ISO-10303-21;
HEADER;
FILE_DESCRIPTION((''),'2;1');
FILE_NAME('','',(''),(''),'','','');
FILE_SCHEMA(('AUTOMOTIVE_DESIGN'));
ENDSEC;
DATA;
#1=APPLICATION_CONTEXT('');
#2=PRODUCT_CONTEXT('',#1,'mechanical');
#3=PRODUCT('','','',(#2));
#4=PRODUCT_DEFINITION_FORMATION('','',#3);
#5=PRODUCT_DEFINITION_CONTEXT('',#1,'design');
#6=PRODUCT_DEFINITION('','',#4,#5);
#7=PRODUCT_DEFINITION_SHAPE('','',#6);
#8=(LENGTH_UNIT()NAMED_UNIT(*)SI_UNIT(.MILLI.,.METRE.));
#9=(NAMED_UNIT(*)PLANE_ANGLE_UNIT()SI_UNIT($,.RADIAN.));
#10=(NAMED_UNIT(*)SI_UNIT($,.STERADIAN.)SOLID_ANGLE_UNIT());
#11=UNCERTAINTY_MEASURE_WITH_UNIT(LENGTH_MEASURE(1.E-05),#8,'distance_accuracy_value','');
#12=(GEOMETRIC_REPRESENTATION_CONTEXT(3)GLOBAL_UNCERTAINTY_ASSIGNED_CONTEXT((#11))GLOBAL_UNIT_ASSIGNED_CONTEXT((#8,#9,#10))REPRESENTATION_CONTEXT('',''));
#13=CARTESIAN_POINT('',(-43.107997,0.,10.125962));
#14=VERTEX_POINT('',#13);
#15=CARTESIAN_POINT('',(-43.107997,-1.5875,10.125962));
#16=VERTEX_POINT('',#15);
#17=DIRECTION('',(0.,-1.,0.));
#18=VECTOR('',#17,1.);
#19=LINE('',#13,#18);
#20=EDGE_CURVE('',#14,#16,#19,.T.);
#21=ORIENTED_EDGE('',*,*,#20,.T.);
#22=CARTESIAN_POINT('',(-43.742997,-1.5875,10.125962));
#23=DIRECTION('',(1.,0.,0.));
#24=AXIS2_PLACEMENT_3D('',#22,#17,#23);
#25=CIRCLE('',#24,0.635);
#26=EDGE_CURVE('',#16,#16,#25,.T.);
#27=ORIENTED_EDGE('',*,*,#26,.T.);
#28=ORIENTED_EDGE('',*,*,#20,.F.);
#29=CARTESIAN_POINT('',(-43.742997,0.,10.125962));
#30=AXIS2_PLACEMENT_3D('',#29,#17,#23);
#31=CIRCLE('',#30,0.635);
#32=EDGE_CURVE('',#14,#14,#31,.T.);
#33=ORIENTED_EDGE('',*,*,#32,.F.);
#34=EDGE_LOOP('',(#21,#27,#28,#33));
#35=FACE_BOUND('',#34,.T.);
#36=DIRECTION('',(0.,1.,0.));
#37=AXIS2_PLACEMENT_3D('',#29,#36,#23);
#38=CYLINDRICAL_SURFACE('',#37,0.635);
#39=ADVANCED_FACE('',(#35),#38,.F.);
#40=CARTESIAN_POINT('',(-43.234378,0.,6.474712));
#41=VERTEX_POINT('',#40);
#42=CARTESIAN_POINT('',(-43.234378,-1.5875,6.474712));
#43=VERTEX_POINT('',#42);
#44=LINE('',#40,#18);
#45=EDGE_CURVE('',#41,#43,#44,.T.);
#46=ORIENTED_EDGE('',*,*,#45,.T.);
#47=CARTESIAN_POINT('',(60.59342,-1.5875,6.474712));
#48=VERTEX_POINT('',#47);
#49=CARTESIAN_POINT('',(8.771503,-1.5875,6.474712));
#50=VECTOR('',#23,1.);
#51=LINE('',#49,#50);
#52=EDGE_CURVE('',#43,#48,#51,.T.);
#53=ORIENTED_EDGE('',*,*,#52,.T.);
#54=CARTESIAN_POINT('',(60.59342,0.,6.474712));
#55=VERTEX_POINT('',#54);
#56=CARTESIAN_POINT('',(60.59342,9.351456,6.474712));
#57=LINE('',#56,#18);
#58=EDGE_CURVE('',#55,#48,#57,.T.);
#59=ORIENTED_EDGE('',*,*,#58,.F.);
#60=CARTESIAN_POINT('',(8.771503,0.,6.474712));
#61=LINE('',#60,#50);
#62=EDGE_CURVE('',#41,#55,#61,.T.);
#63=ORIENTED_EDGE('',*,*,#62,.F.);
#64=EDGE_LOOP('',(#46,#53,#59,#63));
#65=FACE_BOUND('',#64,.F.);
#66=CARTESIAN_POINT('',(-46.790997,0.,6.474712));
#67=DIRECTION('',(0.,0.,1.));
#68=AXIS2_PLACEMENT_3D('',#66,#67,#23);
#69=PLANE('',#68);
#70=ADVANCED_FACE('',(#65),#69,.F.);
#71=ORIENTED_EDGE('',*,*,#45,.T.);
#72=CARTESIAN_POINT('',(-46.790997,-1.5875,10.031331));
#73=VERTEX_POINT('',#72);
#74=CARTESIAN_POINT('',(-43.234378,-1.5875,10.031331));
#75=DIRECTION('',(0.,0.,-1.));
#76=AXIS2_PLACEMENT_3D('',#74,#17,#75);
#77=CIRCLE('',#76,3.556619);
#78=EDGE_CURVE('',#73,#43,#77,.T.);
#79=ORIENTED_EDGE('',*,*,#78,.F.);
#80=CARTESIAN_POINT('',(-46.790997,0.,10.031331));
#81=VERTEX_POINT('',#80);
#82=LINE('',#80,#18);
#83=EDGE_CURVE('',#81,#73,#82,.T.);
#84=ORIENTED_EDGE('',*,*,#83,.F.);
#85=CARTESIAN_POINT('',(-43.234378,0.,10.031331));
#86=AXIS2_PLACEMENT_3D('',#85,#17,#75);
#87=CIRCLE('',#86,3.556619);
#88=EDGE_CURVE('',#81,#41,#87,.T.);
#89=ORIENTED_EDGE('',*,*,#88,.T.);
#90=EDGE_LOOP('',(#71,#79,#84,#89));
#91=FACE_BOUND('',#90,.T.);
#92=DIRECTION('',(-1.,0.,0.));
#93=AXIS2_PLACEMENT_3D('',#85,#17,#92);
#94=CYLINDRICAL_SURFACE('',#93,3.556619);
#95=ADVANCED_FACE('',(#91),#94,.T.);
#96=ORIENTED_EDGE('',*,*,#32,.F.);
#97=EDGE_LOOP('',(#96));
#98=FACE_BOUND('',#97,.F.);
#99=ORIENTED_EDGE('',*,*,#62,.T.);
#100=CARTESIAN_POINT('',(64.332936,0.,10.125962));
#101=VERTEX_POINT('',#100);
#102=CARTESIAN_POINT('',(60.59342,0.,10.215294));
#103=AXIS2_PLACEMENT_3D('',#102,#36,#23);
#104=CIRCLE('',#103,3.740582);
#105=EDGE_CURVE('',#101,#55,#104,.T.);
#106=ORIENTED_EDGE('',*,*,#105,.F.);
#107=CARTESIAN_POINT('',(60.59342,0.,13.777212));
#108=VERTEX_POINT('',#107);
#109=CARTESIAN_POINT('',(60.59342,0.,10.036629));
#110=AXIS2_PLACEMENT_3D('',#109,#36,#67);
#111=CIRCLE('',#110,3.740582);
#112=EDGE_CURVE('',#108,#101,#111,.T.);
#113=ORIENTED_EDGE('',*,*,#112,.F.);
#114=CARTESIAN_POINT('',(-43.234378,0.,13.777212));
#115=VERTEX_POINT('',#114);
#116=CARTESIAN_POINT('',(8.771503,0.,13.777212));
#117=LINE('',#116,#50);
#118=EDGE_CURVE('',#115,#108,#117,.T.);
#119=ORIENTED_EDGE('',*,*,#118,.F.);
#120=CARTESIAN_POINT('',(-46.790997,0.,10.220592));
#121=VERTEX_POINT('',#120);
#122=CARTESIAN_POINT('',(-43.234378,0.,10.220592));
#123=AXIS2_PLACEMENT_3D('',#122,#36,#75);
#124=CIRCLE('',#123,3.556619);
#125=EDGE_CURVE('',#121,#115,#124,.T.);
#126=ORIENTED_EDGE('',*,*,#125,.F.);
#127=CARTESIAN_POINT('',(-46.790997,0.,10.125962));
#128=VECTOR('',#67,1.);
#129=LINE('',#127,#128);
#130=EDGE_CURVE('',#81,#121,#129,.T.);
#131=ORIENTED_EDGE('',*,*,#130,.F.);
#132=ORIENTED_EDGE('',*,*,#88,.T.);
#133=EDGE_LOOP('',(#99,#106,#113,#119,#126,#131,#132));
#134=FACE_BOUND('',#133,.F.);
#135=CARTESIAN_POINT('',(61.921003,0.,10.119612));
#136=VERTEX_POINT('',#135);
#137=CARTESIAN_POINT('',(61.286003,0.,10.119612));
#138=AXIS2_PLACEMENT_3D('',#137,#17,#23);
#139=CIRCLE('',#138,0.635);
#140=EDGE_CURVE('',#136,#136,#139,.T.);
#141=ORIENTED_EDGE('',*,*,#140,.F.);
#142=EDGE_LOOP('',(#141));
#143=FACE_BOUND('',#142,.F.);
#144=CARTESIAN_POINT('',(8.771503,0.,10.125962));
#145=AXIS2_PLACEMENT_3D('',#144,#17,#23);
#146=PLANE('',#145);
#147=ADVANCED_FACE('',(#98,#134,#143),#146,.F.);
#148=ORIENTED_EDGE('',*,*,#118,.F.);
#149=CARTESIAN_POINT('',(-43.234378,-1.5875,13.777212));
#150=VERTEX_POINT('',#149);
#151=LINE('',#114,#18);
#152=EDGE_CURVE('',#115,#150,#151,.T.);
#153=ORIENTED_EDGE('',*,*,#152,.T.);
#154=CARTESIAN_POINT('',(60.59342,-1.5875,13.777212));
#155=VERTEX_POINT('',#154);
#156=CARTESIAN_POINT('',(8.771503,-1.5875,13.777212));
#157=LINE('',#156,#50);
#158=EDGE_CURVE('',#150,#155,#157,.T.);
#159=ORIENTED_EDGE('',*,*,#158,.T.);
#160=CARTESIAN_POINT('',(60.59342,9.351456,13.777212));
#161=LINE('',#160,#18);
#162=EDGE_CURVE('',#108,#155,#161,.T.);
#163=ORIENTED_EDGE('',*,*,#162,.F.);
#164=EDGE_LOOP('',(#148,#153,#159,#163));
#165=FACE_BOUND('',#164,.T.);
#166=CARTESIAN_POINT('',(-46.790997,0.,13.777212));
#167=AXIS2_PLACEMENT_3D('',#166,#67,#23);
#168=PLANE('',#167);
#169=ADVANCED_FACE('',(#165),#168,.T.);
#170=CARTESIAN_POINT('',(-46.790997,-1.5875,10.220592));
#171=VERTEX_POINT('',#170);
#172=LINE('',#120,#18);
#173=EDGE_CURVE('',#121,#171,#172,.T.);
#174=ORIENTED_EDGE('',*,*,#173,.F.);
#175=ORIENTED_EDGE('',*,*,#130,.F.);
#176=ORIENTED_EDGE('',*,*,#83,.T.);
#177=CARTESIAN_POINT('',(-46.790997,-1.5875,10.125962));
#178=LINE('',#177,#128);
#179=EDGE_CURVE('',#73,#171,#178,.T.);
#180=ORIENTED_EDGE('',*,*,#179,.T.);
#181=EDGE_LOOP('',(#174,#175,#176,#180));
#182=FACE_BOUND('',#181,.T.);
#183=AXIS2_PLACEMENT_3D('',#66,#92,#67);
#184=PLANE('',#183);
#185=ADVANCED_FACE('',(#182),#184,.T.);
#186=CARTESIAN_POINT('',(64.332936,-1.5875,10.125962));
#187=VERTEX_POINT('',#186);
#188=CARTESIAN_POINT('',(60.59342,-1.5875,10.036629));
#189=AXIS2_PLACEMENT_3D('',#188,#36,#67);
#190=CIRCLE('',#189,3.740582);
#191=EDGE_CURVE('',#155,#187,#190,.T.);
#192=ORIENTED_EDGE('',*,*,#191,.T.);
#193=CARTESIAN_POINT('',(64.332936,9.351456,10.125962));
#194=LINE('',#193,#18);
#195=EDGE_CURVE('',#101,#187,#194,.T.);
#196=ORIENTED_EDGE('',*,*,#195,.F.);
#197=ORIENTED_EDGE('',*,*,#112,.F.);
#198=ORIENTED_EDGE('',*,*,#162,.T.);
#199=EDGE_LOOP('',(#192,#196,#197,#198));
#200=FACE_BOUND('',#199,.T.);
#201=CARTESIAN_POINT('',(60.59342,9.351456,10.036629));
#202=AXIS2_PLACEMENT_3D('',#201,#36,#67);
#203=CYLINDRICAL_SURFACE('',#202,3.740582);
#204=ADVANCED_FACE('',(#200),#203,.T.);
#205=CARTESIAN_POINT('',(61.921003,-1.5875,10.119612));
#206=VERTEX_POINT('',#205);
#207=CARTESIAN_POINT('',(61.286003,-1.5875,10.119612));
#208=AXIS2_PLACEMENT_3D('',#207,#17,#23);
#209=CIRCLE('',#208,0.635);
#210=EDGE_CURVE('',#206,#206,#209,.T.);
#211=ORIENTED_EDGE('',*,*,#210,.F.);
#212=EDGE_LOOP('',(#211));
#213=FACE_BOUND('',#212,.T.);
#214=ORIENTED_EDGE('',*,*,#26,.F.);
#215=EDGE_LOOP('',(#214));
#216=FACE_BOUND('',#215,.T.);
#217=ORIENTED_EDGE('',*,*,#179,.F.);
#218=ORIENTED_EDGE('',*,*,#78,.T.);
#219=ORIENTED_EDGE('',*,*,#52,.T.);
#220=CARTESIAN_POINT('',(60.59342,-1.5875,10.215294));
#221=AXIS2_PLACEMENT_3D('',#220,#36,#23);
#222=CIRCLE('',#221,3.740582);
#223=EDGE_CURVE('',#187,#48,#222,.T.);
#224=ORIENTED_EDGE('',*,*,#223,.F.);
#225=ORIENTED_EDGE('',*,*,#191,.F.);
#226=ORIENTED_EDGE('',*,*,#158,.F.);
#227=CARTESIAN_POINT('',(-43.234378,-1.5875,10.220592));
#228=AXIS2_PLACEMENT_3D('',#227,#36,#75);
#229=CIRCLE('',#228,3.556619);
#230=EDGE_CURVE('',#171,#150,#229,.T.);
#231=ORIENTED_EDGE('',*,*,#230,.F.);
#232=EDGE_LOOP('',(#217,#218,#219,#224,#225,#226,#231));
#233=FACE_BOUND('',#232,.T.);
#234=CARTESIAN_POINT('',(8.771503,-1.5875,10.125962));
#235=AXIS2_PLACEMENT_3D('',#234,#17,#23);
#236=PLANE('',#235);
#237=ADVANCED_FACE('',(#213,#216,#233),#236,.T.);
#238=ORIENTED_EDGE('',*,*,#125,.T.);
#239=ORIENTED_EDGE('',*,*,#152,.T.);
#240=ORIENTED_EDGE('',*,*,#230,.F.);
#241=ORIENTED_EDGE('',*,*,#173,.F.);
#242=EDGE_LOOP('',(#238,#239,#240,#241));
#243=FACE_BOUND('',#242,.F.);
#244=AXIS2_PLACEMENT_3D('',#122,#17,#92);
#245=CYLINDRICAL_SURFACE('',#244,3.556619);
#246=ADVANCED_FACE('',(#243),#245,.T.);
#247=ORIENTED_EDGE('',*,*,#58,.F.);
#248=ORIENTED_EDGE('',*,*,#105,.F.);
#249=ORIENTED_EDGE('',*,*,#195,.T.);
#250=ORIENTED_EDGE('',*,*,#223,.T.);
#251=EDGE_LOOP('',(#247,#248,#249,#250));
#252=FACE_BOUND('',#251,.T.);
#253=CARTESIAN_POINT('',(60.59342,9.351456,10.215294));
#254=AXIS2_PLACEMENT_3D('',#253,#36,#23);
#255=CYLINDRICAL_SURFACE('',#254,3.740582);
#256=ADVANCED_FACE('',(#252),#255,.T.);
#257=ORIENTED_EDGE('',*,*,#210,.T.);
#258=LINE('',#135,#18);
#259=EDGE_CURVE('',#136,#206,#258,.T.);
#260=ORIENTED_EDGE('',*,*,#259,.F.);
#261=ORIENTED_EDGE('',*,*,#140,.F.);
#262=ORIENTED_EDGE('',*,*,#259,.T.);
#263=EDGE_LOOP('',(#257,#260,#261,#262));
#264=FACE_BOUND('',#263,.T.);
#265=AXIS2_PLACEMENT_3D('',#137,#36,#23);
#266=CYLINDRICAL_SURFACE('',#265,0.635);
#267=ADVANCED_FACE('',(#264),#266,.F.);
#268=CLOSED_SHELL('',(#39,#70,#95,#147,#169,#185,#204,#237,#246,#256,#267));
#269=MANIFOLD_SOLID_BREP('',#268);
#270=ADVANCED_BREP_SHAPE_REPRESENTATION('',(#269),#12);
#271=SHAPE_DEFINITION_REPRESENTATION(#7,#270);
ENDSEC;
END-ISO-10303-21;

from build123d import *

# Parameters (mm, degrees)
F0_W        = 111.125
F0_H        = 7.3025
F0_R        = 0.635
F1_DEPTH    = 1.5875
F2_R        = 3.5566194201
F3_T1_DEPTH = 20.2904124677


# Not quite as in the source:
# - a fillet or chamfer that OpenCascade refuses, or shapes differently, is made with other operations: its cross-section is extruded or revolved along the edge and cut away or added


with BuildPart() as f1:
    # F0 (on Front) → F1 (new body)
    with BuildSketch(Plane.XZ):
        with Locations((8.7715025485, 10.1259618964)):
            Rectangle(F0_W, F0_H)
        with Locations((-43.7429974515, 10.1259618964)):
            Circle(F0_R, mode=Mode.SUBTRACT)
        with Locations((61.2860025485, 10.1196118964)):
            Circle(F0_R, mode=Mode.SUBTRACT)
    extrude(amount=F1_DEPTH)

    # F2
    f2_edges = [f1.edges().sort_by_distance(p)[0] for p in [
        (-46.790997, -0.79375, 13.777212),
        (-46.790997, -0.79375, 6.474712),
    ]]
    fillet(f2_edges, radius=F2_R)

    # F3: fillet of radius 3.7405824935 on 2 edges, made by hand

    # F3_s2 → F3_t1 (cut)
    with BuildSketch(Plane.XZ.offset(-9.3514562339)):
        with BuildLine():
            ThreePointArc((60.5934200549, 13.7772118964), (63.2384113017, 12.6816206496), (64.3340025485, 10.0366294028))
            Line((64.3340025485, 10.0366294028), (64.3340025485, 13.7772118964))
            Line((64.3340025485, 13.7772118964), (60.5934200549, 13.7772118964))
        make_face()
        with BuildLine():
            ThreePointArc((64.3340025485, 10.2152943899), (63.2384113017, 7.5703031432), (60.5934200549, 6.4747118964))
            Line((60.5934200549, 6.4747118964), (64.3340025485, 6.4747118964))
            Line((64.3340025485, 6.4747118964), (64.3340025485, 10.2152943899))
        make_face()
    extrude(amount=F3_T1_DEPTH, mode=Mode.SUBTRACT)


solid = f1.part
